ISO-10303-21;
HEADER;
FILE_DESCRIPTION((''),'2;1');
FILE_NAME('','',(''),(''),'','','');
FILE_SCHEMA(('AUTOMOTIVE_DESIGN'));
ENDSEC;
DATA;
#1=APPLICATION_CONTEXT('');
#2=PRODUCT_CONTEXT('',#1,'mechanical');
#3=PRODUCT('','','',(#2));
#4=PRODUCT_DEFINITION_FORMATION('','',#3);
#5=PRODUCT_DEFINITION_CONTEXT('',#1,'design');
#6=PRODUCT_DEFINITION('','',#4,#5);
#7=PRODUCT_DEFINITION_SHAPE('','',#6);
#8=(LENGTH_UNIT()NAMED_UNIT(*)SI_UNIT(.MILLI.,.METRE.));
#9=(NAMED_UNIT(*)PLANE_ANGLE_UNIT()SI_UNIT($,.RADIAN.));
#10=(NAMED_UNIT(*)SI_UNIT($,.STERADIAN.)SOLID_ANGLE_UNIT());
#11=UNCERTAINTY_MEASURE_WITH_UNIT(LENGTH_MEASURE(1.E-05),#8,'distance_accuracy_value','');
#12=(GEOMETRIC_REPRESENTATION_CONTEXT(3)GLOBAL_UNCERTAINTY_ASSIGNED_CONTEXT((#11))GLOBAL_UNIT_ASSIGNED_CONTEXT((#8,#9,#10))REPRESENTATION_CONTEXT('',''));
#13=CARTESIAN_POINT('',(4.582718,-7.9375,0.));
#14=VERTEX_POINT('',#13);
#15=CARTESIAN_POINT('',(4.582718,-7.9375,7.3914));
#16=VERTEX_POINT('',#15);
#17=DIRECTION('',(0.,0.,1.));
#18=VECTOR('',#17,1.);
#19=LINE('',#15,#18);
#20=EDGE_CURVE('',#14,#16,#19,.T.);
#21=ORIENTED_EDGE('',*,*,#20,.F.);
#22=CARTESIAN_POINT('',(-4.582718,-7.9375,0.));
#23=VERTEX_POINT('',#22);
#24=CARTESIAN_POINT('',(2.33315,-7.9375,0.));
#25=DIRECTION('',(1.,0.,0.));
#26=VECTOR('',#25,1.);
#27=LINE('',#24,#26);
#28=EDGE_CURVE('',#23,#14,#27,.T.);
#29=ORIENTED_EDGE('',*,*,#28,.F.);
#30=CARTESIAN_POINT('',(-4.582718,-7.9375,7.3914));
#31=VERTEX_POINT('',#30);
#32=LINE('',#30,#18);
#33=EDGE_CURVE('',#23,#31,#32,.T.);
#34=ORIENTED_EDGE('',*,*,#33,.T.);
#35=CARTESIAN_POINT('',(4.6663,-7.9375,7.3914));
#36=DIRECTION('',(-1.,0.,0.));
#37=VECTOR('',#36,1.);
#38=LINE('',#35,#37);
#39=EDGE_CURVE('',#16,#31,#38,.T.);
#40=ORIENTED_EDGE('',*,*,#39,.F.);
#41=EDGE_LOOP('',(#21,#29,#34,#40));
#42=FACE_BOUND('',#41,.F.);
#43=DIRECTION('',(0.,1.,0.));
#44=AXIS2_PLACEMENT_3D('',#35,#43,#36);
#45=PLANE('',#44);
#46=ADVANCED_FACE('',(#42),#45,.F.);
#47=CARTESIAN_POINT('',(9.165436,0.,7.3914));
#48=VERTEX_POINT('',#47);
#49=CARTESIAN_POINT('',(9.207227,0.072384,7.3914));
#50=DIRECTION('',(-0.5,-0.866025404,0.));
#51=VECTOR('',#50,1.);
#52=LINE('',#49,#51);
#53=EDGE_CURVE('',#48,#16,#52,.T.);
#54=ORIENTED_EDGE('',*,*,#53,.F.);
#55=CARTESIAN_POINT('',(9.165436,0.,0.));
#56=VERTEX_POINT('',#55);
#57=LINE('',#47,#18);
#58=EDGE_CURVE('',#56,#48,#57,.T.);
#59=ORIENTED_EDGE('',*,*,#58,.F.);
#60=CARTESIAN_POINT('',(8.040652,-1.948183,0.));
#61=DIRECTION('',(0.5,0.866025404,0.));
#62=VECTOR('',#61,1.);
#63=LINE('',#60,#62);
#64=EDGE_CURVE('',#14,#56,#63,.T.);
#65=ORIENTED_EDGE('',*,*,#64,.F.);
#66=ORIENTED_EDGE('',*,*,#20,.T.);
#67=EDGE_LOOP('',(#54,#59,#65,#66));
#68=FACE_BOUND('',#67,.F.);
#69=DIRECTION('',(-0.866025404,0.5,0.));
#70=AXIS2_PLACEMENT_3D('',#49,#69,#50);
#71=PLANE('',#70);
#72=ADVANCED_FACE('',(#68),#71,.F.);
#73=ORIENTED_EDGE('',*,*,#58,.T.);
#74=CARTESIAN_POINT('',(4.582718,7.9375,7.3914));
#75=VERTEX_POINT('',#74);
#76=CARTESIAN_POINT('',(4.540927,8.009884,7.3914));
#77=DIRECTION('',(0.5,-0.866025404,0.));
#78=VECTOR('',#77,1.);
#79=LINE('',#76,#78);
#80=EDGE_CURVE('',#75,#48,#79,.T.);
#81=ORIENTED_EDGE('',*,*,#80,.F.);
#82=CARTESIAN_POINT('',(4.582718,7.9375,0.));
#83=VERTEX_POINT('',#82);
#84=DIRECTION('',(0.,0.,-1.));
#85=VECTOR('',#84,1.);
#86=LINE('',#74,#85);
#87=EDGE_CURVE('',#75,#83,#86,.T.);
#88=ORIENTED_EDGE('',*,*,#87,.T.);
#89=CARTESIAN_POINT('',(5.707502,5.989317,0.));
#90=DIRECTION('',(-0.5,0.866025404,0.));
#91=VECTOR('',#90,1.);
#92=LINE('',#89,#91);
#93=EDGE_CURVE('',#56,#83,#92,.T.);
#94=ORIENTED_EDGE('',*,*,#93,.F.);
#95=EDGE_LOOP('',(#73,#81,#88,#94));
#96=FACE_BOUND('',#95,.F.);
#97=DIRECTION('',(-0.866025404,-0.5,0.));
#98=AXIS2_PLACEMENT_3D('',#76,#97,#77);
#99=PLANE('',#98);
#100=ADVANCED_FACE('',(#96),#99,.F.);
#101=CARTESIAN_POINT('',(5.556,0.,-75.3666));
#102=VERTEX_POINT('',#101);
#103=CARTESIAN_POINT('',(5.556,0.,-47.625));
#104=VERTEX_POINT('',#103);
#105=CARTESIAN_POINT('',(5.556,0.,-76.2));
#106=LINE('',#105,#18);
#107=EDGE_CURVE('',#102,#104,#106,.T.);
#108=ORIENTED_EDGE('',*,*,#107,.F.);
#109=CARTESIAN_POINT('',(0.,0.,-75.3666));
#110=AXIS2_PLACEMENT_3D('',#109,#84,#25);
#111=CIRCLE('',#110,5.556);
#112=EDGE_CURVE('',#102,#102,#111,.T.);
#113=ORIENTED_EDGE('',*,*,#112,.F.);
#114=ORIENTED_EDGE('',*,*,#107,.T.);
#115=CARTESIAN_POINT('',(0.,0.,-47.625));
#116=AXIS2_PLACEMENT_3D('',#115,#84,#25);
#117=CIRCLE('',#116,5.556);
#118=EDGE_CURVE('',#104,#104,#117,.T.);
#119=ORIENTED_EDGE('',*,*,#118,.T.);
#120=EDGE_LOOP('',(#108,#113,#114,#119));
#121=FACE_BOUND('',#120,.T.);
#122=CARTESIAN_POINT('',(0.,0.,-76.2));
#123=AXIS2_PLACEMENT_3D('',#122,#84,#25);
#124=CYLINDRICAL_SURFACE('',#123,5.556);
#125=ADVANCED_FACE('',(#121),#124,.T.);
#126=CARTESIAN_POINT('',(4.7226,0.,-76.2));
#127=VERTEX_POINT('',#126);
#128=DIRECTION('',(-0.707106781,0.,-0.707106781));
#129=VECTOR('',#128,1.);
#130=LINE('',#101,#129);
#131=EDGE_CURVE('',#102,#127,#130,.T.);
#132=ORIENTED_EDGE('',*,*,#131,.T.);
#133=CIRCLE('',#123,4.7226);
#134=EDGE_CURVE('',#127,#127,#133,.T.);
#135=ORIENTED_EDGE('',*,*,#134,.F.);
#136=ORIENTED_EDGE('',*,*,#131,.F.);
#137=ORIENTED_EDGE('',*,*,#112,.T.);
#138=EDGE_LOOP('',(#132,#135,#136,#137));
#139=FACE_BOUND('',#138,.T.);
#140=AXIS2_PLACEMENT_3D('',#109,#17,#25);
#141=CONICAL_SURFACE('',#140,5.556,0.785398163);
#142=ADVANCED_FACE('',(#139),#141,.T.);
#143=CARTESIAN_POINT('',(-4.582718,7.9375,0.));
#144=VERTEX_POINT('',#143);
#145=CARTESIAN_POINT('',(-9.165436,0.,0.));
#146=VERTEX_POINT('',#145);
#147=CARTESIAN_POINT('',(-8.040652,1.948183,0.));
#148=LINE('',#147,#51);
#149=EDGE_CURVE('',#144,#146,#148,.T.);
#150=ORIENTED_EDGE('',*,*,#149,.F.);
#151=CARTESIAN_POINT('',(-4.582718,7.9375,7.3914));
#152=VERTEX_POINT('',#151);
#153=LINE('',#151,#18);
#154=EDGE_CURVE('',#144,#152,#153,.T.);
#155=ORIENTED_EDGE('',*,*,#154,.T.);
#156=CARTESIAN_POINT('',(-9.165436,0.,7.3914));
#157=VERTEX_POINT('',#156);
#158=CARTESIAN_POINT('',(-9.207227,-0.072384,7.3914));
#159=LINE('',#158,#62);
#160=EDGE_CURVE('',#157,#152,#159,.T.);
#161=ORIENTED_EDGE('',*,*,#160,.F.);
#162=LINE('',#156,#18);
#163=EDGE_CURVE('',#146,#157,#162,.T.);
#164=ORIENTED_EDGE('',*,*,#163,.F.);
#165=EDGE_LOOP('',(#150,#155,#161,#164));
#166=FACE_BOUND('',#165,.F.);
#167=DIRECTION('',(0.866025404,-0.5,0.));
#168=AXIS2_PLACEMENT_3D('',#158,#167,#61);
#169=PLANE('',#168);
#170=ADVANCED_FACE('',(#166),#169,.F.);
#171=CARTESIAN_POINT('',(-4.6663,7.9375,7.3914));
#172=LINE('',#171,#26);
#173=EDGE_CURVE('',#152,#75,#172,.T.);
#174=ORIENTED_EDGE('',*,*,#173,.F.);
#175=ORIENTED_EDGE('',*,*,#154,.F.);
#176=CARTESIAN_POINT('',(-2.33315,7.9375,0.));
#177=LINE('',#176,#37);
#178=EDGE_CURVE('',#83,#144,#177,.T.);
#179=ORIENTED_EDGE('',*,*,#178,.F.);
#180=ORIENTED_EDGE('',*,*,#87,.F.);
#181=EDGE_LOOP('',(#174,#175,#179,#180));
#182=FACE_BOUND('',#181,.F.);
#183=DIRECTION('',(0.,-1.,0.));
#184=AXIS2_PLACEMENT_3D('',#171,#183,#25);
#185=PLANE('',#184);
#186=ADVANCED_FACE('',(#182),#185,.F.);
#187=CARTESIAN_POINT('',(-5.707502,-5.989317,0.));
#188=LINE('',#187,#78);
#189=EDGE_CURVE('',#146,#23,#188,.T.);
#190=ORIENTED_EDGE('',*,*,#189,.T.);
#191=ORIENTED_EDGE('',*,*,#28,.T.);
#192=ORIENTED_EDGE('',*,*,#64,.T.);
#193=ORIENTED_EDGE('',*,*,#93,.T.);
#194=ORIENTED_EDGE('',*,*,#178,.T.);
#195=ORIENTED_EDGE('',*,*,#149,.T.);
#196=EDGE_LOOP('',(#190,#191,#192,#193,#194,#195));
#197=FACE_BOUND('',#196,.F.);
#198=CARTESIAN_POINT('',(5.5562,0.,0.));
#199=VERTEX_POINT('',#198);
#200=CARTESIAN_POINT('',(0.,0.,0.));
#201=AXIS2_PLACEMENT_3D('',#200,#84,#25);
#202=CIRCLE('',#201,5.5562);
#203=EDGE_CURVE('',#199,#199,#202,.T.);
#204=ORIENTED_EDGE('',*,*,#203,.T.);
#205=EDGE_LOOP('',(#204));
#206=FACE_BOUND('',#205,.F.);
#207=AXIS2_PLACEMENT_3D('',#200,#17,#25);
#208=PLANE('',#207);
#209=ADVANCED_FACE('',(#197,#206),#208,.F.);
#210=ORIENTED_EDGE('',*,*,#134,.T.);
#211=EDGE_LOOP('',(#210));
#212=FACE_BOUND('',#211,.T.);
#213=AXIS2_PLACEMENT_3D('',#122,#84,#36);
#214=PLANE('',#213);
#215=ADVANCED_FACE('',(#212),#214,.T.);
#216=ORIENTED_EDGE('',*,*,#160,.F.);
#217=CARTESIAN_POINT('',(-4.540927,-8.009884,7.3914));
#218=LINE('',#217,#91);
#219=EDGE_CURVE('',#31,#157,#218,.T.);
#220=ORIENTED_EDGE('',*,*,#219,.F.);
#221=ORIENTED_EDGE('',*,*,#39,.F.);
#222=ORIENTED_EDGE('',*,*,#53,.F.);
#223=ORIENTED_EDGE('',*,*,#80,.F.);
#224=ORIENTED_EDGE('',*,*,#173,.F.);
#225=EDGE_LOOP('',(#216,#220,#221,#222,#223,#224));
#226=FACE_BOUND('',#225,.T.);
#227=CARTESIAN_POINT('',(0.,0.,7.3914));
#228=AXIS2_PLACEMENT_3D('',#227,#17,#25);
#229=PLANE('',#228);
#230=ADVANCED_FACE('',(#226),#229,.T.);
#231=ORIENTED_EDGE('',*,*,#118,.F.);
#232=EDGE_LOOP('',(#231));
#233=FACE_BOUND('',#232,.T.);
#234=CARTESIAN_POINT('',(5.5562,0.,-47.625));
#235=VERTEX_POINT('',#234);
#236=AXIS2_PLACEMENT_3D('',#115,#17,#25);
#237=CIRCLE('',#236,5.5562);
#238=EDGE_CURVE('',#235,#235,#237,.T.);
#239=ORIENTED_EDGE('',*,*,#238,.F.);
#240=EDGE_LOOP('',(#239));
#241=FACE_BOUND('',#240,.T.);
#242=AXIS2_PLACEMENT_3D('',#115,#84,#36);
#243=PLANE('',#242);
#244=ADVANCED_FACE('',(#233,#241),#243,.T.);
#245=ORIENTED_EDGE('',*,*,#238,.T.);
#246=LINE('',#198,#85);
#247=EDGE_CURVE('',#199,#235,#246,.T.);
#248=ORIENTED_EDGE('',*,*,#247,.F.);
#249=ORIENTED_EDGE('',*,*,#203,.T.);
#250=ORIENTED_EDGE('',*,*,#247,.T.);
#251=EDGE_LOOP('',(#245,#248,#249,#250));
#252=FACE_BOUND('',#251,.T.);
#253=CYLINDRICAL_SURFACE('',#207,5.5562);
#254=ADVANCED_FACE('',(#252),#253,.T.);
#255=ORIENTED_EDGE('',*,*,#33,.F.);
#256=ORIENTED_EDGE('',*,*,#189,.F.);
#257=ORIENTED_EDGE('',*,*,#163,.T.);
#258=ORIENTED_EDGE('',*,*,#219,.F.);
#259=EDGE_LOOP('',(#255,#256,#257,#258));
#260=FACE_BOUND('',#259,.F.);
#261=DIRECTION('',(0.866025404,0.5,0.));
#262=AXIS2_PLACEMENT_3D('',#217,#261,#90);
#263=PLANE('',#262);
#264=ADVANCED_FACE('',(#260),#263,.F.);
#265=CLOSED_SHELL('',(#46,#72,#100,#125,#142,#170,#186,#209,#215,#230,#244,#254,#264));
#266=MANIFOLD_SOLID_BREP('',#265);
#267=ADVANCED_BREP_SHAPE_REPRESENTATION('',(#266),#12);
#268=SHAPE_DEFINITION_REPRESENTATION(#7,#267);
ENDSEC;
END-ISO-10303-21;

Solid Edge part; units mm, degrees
sketch "Sketch1" plane through (0, 0, 0) normal (0, 0, 1) x (1, 0, 0)
  circle A0 centre (0, 0) radius 9.2075
  dimension "D1" = 18.415
extrude "Protrusion1" add sketch "Sketch1" along normal blind 7.3914
sketch "Sketch2" plane through (0, 0, 0) normal (0, 0, -1) x (1, 0, 0)
  circle A0 centre (0, 0) radius 5.5562
extrude "Protrusion2" add sketch "Sketch2" along normal blind 76.2
sketch "Sketch3" plane through (0, 0, -76.2) normal (0, 0, -1) x (1, 0, 0)
  circle A0 centre (0, 0) radius 5.556
extrude "Cutout1" cut sketch "Sketch3" against normal blind 28.575 flip side to cut
chamfer "Chamfer_1" distance 0.8334 angle 45 1 edges at (-5.556, 0, -76.2)
sketch "Sketch4" plane through (0, 0, 7.3914) normal (0, 0, 1) x (1, 0, 0)
  line L0 (-4.6663, 7.9375) -> (4.6663, 7.9375)
  dimension "D1" = 15.875
extrude "Cutout2" cut sketch "Sketch4" against normal up to next material side at (0, 7.9875, 7.3914)
pattern_circular "Pattern1" count 6 over 360 about axis through (0, 0, 7.3914) along (0, 0, 1) of "Cutout2"
properties part number "117631"
